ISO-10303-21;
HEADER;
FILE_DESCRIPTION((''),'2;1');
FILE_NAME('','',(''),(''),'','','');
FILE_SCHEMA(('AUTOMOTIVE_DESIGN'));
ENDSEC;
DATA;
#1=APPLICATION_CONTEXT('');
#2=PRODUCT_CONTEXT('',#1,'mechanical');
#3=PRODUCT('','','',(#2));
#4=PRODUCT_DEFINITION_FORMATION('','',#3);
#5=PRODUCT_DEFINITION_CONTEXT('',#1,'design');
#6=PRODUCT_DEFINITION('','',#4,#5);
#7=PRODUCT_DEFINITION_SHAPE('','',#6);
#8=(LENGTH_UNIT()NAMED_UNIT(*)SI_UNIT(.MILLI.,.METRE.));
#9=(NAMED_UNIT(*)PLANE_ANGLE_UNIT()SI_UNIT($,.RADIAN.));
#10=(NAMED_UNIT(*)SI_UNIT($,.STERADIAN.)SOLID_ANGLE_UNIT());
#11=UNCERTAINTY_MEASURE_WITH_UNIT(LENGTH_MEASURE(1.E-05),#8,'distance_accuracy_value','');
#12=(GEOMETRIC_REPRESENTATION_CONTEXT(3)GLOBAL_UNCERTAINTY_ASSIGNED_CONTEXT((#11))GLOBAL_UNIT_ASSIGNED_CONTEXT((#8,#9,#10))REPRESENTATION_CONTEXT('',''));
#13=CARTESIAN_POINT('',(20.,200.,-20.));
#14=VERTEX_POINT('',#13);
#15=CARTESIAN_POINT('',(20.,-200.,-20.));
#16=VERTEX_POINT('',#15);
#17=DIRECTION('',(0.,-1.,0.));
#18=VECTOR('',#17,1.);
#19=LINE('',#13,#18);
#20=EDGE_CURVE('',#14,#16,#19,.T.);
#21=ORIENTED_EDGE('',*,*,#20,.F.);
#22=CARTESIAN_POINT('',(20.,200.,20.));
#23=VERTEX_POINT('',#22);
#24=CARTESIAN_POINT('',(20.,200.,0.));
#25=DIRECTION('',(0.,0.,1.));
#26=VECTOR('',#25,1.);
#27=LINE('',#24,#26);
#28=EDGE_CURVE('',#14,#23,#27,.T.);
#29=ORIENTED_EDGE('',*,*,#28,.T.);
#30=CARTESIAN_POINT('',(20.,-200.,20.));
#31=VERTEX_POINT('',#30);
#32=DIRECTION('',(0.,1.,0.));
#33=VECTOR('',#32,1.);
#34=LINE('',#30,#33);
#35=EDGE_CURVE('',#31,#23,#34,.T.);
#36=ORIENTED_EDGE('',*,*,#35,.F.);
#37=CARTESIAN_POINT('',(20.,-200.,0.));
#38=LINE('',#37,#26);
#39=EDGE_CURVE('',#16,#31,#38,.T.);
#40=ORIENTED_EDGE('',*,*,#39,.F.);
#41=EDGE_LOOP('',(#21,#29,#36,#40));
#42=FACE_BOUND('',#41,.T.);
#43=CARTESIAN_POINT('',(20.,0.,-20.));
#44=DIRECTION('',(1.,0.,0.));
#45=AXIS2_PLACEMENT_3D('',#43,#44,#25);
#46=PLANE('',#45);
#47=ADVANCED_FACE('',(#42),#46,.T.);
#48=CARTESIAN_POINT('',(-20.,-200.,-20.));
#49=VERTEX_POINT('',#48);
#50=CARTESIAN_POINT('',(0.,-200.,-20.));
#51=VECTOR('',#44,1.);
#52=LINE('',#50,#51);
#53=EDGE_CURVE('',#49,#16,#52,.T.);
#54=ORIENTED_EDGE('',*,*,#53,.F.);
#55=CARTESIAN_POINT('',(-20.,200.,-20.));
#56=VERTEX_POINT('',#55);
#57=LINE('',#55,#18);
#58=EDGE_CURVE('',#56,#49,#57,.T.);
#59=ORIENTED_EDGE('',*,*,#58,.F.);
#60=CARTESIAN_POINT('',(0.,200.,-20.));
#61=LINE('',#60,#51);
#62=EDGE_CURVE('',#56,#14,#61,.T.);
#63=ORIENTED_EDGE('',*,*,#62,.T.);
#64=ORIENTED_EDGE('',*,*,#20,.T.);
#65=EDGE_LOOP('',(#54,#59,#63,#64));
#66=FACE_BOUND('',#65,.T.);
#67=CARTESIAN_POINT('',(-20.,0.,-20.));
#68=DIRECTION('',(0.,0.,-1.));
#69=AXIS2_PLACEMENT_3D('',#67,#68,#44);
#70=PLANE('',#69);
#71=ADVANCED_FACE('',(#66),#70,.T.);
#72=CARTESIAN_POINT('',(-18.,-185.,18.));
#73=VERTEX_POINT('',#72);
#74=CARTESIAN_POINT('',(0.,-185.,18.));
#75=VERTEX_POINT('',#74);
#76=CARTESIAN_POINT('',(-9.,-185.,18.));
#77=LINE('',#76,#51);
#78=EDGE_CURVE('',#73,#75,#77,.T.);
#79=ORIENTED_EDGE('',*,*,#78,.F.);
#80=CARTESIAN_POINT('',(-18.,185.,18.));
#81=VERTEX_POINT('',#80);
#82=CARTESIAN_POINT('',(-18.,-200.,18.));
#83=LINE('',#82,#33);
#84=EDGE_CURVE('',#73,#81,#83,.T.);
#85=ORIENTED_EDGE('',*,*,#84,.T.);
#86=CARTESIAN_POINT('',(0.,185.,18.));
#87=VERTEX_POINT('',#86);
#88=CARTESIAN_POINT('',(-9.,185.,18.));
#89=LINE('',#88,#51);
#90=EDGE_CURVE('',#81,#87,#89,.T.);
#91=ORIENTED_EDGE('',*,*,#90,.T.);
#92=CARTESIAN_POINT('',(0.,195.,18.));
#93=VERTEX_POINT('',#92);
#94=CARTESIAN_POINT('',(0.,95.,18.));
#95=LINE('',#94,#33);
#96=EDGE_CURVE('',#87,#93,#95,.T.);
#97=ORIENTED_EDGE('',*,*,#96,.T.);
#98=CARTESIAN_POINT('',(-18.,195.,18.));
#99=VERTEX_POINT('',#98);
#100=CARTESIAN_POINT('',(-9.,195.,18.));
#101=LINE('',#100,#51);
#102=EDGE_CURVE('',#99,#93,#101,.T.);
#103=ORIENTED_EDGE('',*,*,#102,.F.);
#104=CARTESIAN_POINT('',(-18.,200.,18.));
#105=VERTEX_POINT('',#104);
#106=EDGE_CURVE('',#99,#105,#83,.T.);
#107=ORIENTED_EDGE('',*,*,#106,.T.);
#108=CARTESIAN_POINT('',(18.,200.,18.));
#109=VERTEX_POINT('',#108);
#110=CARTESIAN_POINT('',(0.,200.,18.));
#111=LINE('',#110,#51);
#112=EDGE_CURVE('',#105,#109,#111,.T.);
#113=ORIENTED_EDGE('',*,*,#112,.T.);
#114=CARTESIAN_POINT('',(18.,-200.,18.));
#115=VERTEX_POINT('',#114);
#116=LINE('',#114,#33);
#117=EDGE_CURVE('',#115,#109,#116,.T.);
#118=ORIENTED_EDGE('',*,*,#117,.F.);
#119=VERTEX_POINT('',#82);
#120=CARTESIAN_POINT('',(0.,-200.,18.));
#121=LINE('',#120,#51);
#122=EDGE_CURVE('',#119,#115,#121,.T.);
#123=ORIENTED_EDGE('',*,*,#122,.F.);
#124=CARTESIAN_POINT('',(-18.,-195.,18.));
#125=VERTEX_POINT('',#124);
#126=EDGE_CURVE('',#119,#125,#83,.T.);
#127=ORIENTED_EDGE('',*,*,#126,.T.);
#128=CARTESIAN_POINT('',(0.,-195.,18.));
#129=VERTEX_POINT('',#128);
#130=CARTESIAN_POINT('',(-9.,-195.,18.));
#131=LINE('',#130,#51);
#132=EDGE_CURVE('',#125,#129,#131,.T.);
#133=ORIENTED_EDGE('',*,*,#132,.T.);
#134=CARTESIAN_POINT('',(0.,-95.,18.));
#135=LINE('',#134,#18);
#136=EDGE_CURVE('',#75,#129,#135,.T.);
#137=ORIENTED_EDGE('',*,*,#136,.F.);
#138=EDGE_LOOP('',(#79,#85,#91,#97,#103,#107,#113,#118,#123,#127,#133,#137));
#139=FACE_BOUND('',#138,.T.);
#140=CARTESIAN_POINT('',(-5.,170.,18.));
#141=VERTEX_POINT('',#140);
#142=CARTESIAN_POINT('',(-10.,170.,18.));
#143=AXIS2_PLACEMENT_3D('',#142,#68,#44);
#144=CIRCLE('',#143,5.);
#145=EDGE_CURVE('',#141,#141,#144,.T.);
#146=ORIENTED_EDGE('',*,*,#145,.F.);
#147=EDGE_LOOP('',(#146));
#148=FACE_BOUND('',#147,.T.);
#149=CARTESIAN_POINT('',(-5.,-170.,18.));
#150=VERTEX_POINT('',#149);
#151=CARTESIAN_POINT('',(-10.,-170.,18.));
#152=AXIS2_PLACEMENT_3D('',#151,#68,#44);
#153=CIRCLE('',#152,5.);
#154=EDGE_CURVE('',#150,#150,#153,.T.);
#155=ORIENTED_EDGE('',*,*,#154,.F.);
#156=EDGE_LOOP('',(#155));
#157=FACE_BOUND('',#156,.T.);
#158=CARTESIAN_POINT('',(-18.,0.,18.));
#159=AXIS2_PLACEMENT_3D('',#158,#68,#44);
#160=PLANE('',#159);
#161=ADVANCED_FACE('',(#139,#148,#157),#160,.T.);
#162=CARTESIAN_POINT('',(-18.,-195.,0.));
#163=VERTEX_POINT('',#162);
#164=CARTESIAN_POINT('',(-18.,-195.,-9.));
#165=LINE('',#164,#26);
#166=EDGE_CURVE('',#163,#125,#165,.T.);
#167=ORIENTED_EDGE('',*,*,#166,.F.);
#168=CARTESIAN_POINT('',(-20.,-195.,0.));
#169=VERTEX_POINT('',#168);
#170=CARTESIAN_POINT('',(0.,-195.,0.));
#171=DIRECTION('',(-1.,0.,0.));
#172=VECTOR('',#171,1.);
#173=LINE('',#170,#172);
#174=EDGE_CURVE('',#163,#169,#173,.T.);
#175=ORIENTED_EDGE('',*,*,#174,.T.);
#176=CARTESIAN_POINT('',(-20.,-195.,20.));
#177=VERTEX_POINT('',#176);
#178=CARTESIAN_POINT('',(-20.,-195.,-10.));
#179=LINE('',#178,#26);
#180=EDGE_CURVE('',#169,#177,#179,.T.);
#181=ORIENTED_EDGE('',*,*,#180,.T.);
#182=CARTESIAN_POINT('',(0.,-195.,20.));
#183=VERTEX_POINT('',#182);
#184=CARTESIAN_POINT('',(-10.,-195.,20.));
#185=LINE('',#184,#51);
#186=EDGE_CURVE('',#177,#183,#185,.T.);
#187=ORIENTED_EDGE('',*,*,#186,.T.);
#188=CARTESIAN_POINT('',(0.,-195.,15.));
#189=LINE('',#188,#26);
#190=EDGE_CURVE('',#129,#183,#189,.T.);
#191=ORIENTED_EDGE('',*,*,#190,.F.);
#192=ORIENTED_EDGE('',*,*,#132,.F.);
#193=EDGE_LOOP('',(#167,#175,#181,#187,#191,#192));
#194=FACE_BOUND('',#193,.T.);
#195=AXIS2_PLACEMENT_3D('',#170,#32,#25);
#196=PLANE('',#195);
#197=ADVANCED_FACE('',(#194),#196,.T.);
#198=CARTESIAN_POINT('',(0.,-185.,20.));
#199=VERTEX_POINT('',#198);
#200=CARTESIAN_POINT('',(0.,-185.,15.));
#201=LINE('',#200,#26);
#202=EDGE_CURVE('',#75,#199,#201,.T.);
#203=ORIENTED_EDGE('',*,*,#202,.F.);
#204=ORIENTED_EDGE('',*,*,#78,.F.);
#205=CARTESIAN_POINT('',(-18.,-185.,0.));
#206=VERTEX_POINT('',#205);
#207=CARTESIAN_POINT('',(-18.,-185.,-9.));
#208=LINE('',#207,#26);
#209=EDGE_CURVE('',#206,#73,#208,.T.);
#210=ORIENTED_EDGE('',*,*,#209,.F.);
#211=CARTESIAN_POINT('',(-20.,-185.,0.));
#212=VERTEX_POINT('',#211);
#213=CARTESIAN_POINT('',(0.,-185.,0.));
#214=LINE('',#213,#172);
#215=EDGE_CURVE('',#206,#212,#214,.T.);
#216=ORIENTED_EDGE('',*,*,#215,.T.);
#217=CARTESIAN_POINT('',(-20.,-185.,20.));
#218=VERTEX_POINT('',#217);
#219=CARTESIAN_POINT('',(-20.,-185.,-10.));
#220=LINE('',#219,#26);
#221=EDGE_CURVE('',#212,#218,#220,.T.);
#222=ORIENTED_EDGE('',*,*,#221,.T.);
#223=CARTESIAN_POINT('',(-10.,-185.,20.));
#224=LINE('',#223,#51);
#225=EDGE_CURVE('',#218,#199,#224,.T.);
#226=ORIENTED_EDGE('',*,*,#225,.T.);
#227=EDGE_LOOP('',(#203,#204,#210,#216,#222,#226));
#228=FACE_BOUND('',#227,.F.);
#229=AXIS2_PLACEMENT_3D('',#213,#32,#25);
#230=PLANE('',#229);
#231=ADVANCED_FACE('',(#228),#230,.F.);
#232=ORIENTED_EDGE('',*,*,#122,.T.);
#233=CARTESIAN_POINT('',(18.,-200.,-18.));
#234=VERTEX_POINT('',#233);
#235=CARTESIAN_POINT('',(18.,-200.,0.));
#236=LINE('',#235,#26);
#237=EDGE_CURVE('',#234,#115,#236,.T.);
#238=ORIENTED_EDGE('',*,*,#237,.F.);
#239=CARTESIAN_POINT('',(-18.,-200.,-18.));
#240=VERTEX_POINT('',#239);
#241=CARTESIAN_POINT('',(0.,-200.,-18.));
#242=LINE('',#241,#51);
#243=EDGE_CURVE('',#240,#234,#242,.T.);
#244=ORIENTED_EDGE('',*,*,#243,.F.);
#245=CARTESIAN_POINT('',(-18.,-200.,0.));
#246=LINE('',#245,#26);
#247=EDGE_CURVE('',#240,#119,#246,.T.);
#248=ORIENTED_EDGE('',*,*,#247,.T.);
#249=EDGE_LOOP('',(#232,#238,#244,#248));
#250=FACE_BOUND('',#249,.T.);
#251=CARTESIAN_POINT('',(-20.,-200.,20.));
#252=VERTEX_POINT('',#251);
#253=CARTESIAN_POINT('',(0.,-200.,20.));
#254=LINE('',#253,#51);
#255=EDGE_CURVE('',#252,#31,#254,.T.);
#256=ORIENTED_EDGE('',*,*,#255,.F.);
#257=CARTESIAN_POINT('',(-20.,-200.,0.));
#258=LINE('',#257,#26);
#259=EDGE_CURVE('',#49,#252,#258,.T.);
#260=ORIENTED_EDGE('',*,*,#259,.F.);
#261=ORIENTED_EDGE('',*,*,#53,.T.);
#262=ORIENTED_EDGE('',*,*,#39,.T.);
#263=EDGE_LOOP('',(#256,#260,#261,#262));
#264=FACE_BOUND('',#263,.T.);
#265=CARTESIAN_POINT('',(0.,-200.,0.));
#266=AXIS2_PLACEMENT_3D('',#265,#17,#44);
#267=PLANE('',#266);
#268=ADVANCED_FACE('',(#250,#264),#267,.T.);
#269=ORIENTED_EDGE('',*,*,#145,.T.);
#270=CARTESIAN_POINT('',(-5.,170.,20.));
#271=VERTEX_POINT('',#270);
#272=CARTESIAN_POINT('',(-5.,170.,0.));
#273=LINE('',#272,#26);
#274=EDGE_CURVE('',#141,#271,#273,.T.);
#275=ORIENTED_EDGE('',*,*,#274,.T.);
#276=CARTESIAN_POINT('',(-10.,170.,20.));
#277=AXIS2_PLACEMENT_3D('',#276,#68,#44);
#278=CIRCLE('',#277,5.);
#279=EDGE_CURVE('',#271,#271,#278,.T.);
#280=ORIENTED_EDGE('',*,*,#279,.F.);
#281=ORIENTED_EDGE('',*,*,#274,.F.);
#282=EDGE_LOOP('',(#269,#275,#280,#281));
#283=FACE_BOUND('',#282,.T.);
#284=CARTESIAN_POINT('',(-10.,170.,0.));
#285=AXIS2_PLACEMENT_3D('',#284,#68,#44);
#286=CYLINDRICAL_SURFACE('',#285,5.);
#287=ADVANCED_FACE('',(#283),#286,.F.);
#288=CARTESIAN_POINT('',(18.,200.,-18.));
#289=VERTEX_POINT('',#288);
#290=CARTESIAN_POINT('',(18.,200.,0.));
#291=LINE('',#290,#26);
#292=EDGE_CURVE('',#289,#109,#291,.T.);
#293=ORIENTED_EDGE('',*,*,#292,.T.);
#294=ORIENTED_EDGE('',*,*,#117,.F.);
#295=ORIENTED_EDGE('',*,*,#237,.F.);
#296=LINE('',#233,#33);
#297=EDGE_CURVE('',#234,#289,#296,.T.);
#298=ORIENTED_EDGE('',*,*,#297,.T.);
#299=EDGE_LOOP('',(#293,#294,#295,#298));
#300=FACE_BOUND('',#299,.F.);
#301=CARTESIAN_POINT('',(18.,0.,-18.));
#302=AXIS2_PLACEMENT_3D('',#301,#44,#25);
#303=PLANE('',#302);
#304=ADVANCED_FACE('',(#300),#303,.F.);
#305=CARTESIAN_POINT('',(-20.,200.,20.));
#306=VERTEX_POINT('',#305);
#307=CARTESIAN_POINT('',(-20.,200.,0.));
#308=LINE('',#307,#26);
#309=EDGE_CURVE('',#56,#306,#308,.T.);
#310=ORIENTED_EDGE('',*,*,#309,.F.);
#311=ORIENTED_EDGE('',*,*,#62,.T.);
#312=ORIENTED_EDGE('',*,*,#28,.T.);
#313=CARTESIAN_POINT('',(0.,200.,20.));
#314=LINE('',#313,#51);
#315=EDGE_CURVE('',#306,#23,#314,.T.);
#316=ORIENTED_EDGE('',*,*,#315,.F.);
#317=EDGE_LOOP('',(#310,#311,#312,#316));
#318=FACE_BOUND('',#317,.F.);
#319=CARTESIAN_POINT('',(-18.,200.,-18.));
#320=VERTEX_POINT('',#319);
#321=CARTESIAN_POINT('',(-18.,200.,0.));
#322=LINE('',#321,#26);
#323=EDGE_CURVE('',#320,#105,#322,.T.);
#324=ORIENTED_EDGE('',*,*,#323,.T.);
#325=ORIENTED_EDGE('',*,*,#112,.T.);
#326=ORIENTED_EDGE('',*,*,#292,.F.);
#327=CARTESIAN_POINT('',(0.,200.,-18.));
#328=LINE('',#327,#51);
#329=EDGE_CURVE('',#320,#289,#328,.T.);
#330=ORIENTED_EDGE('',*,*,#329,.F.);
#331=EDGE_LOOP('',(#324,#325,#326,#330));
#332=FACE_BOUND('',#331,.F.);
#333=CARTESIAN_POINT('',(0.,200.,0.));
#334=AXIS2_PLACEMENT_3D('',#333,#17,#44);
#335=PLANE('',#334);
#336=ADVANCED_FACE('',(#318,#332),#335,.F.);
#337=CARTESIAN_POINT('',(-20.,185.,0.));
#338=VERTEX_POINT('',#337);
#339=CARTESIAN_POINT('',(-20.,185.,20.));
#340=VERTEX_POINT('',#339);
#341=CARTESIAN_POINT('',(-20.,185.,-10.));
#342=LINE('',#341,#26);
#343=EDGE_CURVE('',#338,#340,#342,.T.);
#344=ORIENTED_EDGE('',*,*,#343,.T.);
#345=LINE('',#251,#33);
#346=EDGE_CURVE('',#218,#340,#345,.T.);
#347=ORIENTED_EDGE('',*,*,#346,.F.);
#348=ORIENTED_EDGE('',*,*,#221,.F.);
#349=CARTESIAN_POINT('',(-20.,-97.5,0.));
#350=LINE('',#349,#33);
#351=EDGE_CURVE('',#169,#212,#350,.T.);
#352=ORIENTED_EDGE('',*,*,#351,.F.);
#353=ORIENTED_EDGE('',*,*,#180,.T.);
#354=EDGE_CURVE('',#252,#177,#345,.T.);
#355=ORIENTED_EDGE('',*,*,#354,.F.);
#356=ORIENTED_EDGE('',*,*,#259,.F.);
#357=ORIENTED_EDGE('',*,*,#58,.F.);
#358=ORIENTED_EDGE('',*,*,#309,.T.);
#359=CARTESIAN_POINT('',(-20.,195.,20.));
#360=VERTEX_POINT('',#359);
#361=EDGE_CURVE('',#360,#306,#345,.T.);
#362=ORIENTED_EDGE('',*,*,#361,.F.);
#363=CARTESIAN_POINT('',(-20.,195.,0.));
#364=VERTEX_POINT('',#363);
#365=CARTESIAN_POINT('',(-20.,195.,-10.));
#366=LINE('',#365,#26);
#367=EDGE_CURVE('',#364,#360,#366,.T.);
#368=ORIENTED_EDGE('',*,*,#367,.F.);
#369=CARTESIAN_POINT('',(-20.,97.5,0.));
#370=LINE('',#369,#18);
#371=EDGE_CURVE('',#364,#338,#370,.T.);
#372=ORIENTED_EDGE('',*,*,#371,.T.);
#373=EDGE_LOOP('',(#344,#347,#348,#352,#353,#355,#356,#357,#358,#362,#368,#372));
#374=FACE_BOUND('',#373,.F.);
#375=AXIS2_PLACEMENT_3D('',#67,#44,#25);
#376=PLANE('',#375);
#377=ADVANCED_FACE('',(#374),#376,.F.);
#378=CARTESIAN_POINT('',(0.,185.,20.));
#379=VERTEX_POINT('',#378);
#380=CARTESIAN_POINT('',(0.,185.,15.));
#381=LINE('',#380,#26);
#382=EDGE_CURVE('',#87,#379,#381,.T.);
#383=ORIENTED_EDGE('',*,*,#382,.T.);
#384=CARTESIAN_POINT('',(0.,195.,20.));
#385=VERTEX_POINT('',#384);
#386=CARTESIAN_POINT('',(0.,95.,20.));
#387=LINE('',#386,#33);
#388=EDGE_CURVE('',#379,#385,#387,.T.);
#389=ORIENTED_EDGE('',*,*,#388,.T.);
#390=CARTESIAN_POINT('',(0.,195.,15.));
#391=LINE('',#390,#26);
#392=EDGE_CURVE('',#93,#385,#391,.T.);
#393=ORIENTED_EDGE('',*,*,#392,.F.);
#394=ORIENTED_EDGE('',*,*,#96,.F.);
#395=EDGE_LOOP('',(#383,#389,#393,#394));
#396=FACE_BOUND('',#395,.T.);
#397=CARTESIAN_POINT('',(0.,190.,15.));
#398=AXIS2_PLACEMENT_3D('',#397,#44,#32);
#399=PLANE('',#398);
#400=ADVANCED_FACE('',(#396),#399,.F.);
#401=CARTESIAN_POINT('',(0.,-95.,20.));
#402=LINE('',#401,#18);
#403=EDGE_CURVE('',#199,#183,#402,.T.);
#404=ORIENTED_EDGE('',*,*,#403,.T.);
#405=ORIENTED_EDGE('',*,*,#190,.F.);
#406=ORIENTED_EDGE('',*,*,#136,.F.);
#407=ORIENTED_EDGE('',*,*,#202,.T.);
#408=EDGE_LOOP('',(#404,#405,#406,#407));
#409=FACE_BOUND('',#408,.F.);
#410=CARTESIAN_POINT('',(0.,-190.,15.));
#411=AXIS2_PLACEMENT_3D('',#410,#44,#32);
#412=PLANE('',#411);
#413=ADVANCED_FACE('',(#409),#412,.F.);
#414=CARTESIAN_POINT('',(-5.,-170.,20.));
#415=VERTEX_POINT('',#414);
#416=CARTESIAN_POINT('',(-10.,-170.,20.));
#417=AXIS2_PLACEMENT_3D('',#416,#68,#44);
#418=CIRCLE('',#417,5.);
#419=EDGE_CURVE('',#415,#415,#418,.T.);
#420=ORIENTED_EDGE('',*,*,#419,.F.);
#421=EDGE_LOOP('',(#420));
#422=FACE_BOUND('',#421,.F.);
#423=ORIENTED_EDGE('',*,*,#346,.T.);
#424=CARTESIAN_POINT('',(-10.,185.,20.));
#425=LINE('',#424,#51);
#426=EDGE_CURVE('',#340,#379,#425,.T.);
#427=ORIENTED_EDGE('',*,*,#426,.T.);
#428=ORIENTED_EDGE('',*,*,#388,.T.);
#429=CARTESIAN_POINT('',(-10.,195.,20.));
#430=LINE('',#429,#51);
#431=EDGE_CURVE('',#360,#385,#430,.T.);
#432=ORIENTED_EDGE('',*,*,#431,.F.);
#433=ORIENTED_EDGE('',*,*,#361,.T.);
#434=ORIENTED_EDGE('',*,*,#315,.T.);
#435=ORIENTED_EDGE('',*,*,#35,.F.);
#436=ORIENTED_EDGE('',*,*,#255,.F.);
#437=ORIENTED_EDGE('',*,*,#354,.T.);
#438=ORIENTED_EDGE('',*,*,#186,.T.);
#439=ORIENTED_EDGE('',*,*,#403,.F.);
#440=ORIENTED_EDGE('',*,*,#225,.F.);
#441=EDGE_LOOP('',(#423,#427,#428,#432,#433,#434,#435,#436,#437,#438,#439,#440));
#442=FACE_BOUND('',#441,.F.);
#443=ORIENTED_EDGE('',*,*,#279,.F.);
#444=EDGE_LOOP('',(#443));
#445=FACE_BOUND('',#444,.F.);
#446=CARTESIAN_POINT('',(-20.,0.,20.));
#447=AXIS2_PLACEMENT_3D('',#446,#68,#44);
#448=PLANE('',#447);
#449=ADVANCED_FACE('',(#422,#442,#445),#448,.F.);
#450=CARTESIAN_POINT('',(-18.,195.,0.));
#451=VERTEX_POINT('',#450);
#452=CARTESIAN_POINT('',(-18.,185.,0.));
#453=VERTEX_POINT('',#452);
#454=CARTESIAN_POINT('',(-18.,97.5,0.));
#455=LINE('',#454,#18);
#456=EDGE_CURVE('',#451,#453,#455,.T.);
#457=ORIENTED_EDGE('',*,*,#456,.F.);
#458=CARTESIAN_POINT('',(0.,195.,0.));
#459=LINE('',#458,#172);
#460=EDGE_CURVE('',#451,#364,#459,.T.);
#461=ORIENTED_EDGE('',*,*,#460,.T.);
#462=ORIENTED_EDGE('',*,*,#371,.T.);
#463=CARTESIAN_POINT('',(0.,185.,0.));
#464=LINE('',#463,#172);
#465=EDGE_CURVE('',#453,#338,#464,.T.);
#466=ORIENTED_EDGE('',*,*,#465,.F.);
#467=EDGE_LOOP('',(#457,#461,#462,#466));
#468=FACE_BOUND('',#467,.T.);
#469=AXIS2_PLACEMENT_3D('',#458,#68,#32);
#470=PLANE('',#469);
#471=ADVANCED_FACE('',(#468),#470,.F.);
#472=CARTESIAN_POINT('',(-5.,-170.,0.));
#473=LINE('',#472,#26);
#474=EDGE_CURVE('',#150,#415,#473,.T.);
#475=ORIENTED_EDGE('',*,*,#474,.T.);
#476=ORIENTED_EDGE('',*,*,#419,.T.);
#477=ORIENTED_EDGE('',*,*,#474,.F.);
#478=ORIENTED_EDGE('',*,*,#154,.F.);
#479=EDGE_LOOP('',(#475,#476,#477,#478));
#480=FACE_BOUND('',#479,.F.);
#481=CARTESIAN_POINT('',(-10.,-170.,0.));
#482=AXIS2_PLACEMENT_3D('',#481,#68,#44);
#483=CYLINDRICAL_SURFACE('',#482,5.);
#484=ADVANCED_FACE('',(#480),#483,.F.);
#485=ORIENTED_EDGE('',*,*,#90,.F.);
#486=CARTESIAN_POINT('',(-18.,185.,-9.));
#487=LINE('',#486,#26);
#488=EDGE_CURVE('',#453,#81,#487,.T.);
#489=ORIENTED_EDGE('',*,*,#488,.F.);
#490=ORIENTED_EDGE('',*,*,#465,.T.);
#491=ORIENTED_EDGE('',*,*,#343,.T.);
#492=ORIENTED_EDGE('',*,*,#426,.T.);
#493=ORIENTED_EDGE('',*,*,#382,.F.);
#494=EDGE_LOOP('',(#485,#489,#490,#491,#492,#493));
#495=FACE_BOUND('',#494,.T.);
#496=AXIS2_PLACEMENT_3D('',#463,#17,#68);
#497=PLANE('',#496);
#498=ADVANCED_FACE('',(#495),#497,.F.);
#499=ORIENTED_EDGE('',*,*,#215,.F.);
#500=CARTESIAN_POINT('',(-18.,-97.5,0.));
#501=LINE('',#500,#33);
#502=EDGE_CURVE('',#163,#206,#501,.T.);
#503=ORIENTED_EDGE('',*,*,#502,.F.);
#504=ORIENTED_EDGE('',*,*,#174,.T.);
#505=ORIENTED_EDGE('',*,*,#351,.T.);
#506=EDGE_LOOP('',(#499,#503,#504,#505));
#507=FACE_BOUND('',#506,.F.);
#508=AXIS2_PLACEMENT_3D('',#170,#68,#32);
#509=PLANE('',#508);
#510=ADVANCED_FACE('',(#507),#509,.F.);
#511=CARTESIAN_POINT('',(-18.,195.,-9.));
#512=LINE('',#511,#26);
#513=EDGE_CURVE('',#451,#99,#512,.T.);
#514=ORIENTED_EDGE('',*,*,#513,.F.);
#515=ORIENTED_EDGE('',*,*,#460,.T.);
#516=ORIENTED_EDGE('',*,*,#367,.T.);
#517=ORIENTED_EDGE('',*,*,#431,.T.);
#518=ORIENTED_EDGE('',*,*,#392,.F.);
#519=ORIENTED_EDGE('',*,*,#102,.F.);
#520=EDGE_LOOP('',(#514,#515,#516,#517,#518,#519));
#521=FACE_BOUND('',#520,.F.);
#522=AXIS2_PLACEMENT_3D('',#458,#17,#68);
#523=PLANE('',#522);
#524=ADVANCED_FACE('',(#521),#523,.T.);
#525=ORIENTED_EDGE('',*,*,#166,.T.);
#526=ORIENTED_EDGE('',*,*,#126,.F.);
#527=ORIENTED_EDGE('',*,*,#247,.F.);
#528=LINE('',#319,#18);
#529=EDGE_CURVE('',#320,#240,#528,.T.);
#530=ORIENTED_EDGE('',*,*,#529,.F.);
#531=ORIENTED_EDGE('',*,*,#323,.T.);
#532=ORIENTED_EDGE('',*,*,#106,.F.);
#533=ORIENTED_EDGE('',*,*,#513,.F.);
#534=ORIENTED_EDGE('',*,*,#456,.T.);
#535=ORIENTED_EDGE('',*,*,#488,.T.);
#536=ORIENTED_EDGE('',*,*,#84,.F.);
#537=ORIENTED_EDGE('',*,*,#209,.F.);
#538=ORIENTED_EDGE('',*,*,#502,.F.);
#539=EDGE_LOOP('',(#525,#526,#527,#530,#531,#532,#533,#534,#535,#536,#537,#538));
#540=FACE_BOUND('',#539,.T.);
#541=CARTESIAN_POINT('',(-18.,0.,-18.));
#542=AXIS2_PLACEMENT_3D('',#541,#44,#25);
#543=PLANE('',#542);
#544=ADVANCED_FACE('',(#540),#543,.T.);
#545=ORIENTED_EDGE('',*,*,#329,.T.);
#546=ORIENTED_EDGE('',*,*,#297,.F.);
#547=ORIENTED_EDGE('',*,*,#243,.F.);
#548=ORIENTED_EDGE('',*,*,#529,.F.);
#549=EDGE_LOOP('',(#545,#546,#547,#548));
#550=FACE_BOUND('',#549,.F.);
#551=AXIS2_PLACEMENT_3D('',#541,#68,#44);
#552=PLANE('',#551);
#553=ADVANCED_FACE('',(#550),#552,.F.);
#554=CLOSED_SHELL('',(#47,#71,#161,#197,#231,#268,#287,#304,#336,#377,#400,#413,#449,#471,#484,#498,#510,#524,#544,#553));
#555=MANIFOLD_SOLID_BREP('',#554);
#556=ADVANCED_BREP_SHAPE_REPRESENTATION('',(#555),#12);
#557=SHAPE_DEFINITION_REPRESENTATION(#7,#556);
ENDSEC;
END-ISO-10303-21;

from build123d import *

# Parameters (mm, degrees)
F0_W     = 40
F0_H     = 40
F0_W_2   = 36
F0_H_2   = 36
F1_DEPTH = 200
F2_W     = 10
F2_H     = 30
F3_DEPTH = 20.001
F4_R     = 5
F5_DEPTH = 20.001


# Not quite as in the source:
# - a pattern or mirror of a feature is missing from the dataset's text; its kind, count and spacing are read off the source's solid


with BuildPart() as f1:
    # F0 (on Front) → F1 (new body, symmetric)
    with BuildSketch(Plane.XZ):
        Rectangle(F0_W, F0_H)
        Rectangle(F0_W_2, F0_H_2, mode=Mode.SUBTRACT)
    extrude(amount=F1_DEPTH, both=True)

    # F2 (on Right) → F3 (cut, through all)
    with BuildSketch(Plane.YZ):
        with Locations((-190, 15)):
            Rectangle(F2_W, F2_H)
    f3 = extrude(amount=-F3_DEPTH, mode=Mode.SUBTRACT)

    # F3_copies: F3 across plane
    add(f3.mirror(Plane.ZX), mode=Mode.SUBTRACT)

    # F4 (on Top) → F5 (cut, through all)
    with BuildSketch(Plane.XY):
        with Locations((-10, 170)):
            Circle(F4_R)
    f5 = extrude(amount=F5_DEPTH, mode=Mode.SUBTRACT)

    # F5_copies: F5 across plane
    add(f5.mirror(Plane(origin=(0, 0, 0), x_dir=(0, 0, -1), z_dir=(0, -1, 0))), mode=Mode.SUBTRACT)


solid = f1.part
